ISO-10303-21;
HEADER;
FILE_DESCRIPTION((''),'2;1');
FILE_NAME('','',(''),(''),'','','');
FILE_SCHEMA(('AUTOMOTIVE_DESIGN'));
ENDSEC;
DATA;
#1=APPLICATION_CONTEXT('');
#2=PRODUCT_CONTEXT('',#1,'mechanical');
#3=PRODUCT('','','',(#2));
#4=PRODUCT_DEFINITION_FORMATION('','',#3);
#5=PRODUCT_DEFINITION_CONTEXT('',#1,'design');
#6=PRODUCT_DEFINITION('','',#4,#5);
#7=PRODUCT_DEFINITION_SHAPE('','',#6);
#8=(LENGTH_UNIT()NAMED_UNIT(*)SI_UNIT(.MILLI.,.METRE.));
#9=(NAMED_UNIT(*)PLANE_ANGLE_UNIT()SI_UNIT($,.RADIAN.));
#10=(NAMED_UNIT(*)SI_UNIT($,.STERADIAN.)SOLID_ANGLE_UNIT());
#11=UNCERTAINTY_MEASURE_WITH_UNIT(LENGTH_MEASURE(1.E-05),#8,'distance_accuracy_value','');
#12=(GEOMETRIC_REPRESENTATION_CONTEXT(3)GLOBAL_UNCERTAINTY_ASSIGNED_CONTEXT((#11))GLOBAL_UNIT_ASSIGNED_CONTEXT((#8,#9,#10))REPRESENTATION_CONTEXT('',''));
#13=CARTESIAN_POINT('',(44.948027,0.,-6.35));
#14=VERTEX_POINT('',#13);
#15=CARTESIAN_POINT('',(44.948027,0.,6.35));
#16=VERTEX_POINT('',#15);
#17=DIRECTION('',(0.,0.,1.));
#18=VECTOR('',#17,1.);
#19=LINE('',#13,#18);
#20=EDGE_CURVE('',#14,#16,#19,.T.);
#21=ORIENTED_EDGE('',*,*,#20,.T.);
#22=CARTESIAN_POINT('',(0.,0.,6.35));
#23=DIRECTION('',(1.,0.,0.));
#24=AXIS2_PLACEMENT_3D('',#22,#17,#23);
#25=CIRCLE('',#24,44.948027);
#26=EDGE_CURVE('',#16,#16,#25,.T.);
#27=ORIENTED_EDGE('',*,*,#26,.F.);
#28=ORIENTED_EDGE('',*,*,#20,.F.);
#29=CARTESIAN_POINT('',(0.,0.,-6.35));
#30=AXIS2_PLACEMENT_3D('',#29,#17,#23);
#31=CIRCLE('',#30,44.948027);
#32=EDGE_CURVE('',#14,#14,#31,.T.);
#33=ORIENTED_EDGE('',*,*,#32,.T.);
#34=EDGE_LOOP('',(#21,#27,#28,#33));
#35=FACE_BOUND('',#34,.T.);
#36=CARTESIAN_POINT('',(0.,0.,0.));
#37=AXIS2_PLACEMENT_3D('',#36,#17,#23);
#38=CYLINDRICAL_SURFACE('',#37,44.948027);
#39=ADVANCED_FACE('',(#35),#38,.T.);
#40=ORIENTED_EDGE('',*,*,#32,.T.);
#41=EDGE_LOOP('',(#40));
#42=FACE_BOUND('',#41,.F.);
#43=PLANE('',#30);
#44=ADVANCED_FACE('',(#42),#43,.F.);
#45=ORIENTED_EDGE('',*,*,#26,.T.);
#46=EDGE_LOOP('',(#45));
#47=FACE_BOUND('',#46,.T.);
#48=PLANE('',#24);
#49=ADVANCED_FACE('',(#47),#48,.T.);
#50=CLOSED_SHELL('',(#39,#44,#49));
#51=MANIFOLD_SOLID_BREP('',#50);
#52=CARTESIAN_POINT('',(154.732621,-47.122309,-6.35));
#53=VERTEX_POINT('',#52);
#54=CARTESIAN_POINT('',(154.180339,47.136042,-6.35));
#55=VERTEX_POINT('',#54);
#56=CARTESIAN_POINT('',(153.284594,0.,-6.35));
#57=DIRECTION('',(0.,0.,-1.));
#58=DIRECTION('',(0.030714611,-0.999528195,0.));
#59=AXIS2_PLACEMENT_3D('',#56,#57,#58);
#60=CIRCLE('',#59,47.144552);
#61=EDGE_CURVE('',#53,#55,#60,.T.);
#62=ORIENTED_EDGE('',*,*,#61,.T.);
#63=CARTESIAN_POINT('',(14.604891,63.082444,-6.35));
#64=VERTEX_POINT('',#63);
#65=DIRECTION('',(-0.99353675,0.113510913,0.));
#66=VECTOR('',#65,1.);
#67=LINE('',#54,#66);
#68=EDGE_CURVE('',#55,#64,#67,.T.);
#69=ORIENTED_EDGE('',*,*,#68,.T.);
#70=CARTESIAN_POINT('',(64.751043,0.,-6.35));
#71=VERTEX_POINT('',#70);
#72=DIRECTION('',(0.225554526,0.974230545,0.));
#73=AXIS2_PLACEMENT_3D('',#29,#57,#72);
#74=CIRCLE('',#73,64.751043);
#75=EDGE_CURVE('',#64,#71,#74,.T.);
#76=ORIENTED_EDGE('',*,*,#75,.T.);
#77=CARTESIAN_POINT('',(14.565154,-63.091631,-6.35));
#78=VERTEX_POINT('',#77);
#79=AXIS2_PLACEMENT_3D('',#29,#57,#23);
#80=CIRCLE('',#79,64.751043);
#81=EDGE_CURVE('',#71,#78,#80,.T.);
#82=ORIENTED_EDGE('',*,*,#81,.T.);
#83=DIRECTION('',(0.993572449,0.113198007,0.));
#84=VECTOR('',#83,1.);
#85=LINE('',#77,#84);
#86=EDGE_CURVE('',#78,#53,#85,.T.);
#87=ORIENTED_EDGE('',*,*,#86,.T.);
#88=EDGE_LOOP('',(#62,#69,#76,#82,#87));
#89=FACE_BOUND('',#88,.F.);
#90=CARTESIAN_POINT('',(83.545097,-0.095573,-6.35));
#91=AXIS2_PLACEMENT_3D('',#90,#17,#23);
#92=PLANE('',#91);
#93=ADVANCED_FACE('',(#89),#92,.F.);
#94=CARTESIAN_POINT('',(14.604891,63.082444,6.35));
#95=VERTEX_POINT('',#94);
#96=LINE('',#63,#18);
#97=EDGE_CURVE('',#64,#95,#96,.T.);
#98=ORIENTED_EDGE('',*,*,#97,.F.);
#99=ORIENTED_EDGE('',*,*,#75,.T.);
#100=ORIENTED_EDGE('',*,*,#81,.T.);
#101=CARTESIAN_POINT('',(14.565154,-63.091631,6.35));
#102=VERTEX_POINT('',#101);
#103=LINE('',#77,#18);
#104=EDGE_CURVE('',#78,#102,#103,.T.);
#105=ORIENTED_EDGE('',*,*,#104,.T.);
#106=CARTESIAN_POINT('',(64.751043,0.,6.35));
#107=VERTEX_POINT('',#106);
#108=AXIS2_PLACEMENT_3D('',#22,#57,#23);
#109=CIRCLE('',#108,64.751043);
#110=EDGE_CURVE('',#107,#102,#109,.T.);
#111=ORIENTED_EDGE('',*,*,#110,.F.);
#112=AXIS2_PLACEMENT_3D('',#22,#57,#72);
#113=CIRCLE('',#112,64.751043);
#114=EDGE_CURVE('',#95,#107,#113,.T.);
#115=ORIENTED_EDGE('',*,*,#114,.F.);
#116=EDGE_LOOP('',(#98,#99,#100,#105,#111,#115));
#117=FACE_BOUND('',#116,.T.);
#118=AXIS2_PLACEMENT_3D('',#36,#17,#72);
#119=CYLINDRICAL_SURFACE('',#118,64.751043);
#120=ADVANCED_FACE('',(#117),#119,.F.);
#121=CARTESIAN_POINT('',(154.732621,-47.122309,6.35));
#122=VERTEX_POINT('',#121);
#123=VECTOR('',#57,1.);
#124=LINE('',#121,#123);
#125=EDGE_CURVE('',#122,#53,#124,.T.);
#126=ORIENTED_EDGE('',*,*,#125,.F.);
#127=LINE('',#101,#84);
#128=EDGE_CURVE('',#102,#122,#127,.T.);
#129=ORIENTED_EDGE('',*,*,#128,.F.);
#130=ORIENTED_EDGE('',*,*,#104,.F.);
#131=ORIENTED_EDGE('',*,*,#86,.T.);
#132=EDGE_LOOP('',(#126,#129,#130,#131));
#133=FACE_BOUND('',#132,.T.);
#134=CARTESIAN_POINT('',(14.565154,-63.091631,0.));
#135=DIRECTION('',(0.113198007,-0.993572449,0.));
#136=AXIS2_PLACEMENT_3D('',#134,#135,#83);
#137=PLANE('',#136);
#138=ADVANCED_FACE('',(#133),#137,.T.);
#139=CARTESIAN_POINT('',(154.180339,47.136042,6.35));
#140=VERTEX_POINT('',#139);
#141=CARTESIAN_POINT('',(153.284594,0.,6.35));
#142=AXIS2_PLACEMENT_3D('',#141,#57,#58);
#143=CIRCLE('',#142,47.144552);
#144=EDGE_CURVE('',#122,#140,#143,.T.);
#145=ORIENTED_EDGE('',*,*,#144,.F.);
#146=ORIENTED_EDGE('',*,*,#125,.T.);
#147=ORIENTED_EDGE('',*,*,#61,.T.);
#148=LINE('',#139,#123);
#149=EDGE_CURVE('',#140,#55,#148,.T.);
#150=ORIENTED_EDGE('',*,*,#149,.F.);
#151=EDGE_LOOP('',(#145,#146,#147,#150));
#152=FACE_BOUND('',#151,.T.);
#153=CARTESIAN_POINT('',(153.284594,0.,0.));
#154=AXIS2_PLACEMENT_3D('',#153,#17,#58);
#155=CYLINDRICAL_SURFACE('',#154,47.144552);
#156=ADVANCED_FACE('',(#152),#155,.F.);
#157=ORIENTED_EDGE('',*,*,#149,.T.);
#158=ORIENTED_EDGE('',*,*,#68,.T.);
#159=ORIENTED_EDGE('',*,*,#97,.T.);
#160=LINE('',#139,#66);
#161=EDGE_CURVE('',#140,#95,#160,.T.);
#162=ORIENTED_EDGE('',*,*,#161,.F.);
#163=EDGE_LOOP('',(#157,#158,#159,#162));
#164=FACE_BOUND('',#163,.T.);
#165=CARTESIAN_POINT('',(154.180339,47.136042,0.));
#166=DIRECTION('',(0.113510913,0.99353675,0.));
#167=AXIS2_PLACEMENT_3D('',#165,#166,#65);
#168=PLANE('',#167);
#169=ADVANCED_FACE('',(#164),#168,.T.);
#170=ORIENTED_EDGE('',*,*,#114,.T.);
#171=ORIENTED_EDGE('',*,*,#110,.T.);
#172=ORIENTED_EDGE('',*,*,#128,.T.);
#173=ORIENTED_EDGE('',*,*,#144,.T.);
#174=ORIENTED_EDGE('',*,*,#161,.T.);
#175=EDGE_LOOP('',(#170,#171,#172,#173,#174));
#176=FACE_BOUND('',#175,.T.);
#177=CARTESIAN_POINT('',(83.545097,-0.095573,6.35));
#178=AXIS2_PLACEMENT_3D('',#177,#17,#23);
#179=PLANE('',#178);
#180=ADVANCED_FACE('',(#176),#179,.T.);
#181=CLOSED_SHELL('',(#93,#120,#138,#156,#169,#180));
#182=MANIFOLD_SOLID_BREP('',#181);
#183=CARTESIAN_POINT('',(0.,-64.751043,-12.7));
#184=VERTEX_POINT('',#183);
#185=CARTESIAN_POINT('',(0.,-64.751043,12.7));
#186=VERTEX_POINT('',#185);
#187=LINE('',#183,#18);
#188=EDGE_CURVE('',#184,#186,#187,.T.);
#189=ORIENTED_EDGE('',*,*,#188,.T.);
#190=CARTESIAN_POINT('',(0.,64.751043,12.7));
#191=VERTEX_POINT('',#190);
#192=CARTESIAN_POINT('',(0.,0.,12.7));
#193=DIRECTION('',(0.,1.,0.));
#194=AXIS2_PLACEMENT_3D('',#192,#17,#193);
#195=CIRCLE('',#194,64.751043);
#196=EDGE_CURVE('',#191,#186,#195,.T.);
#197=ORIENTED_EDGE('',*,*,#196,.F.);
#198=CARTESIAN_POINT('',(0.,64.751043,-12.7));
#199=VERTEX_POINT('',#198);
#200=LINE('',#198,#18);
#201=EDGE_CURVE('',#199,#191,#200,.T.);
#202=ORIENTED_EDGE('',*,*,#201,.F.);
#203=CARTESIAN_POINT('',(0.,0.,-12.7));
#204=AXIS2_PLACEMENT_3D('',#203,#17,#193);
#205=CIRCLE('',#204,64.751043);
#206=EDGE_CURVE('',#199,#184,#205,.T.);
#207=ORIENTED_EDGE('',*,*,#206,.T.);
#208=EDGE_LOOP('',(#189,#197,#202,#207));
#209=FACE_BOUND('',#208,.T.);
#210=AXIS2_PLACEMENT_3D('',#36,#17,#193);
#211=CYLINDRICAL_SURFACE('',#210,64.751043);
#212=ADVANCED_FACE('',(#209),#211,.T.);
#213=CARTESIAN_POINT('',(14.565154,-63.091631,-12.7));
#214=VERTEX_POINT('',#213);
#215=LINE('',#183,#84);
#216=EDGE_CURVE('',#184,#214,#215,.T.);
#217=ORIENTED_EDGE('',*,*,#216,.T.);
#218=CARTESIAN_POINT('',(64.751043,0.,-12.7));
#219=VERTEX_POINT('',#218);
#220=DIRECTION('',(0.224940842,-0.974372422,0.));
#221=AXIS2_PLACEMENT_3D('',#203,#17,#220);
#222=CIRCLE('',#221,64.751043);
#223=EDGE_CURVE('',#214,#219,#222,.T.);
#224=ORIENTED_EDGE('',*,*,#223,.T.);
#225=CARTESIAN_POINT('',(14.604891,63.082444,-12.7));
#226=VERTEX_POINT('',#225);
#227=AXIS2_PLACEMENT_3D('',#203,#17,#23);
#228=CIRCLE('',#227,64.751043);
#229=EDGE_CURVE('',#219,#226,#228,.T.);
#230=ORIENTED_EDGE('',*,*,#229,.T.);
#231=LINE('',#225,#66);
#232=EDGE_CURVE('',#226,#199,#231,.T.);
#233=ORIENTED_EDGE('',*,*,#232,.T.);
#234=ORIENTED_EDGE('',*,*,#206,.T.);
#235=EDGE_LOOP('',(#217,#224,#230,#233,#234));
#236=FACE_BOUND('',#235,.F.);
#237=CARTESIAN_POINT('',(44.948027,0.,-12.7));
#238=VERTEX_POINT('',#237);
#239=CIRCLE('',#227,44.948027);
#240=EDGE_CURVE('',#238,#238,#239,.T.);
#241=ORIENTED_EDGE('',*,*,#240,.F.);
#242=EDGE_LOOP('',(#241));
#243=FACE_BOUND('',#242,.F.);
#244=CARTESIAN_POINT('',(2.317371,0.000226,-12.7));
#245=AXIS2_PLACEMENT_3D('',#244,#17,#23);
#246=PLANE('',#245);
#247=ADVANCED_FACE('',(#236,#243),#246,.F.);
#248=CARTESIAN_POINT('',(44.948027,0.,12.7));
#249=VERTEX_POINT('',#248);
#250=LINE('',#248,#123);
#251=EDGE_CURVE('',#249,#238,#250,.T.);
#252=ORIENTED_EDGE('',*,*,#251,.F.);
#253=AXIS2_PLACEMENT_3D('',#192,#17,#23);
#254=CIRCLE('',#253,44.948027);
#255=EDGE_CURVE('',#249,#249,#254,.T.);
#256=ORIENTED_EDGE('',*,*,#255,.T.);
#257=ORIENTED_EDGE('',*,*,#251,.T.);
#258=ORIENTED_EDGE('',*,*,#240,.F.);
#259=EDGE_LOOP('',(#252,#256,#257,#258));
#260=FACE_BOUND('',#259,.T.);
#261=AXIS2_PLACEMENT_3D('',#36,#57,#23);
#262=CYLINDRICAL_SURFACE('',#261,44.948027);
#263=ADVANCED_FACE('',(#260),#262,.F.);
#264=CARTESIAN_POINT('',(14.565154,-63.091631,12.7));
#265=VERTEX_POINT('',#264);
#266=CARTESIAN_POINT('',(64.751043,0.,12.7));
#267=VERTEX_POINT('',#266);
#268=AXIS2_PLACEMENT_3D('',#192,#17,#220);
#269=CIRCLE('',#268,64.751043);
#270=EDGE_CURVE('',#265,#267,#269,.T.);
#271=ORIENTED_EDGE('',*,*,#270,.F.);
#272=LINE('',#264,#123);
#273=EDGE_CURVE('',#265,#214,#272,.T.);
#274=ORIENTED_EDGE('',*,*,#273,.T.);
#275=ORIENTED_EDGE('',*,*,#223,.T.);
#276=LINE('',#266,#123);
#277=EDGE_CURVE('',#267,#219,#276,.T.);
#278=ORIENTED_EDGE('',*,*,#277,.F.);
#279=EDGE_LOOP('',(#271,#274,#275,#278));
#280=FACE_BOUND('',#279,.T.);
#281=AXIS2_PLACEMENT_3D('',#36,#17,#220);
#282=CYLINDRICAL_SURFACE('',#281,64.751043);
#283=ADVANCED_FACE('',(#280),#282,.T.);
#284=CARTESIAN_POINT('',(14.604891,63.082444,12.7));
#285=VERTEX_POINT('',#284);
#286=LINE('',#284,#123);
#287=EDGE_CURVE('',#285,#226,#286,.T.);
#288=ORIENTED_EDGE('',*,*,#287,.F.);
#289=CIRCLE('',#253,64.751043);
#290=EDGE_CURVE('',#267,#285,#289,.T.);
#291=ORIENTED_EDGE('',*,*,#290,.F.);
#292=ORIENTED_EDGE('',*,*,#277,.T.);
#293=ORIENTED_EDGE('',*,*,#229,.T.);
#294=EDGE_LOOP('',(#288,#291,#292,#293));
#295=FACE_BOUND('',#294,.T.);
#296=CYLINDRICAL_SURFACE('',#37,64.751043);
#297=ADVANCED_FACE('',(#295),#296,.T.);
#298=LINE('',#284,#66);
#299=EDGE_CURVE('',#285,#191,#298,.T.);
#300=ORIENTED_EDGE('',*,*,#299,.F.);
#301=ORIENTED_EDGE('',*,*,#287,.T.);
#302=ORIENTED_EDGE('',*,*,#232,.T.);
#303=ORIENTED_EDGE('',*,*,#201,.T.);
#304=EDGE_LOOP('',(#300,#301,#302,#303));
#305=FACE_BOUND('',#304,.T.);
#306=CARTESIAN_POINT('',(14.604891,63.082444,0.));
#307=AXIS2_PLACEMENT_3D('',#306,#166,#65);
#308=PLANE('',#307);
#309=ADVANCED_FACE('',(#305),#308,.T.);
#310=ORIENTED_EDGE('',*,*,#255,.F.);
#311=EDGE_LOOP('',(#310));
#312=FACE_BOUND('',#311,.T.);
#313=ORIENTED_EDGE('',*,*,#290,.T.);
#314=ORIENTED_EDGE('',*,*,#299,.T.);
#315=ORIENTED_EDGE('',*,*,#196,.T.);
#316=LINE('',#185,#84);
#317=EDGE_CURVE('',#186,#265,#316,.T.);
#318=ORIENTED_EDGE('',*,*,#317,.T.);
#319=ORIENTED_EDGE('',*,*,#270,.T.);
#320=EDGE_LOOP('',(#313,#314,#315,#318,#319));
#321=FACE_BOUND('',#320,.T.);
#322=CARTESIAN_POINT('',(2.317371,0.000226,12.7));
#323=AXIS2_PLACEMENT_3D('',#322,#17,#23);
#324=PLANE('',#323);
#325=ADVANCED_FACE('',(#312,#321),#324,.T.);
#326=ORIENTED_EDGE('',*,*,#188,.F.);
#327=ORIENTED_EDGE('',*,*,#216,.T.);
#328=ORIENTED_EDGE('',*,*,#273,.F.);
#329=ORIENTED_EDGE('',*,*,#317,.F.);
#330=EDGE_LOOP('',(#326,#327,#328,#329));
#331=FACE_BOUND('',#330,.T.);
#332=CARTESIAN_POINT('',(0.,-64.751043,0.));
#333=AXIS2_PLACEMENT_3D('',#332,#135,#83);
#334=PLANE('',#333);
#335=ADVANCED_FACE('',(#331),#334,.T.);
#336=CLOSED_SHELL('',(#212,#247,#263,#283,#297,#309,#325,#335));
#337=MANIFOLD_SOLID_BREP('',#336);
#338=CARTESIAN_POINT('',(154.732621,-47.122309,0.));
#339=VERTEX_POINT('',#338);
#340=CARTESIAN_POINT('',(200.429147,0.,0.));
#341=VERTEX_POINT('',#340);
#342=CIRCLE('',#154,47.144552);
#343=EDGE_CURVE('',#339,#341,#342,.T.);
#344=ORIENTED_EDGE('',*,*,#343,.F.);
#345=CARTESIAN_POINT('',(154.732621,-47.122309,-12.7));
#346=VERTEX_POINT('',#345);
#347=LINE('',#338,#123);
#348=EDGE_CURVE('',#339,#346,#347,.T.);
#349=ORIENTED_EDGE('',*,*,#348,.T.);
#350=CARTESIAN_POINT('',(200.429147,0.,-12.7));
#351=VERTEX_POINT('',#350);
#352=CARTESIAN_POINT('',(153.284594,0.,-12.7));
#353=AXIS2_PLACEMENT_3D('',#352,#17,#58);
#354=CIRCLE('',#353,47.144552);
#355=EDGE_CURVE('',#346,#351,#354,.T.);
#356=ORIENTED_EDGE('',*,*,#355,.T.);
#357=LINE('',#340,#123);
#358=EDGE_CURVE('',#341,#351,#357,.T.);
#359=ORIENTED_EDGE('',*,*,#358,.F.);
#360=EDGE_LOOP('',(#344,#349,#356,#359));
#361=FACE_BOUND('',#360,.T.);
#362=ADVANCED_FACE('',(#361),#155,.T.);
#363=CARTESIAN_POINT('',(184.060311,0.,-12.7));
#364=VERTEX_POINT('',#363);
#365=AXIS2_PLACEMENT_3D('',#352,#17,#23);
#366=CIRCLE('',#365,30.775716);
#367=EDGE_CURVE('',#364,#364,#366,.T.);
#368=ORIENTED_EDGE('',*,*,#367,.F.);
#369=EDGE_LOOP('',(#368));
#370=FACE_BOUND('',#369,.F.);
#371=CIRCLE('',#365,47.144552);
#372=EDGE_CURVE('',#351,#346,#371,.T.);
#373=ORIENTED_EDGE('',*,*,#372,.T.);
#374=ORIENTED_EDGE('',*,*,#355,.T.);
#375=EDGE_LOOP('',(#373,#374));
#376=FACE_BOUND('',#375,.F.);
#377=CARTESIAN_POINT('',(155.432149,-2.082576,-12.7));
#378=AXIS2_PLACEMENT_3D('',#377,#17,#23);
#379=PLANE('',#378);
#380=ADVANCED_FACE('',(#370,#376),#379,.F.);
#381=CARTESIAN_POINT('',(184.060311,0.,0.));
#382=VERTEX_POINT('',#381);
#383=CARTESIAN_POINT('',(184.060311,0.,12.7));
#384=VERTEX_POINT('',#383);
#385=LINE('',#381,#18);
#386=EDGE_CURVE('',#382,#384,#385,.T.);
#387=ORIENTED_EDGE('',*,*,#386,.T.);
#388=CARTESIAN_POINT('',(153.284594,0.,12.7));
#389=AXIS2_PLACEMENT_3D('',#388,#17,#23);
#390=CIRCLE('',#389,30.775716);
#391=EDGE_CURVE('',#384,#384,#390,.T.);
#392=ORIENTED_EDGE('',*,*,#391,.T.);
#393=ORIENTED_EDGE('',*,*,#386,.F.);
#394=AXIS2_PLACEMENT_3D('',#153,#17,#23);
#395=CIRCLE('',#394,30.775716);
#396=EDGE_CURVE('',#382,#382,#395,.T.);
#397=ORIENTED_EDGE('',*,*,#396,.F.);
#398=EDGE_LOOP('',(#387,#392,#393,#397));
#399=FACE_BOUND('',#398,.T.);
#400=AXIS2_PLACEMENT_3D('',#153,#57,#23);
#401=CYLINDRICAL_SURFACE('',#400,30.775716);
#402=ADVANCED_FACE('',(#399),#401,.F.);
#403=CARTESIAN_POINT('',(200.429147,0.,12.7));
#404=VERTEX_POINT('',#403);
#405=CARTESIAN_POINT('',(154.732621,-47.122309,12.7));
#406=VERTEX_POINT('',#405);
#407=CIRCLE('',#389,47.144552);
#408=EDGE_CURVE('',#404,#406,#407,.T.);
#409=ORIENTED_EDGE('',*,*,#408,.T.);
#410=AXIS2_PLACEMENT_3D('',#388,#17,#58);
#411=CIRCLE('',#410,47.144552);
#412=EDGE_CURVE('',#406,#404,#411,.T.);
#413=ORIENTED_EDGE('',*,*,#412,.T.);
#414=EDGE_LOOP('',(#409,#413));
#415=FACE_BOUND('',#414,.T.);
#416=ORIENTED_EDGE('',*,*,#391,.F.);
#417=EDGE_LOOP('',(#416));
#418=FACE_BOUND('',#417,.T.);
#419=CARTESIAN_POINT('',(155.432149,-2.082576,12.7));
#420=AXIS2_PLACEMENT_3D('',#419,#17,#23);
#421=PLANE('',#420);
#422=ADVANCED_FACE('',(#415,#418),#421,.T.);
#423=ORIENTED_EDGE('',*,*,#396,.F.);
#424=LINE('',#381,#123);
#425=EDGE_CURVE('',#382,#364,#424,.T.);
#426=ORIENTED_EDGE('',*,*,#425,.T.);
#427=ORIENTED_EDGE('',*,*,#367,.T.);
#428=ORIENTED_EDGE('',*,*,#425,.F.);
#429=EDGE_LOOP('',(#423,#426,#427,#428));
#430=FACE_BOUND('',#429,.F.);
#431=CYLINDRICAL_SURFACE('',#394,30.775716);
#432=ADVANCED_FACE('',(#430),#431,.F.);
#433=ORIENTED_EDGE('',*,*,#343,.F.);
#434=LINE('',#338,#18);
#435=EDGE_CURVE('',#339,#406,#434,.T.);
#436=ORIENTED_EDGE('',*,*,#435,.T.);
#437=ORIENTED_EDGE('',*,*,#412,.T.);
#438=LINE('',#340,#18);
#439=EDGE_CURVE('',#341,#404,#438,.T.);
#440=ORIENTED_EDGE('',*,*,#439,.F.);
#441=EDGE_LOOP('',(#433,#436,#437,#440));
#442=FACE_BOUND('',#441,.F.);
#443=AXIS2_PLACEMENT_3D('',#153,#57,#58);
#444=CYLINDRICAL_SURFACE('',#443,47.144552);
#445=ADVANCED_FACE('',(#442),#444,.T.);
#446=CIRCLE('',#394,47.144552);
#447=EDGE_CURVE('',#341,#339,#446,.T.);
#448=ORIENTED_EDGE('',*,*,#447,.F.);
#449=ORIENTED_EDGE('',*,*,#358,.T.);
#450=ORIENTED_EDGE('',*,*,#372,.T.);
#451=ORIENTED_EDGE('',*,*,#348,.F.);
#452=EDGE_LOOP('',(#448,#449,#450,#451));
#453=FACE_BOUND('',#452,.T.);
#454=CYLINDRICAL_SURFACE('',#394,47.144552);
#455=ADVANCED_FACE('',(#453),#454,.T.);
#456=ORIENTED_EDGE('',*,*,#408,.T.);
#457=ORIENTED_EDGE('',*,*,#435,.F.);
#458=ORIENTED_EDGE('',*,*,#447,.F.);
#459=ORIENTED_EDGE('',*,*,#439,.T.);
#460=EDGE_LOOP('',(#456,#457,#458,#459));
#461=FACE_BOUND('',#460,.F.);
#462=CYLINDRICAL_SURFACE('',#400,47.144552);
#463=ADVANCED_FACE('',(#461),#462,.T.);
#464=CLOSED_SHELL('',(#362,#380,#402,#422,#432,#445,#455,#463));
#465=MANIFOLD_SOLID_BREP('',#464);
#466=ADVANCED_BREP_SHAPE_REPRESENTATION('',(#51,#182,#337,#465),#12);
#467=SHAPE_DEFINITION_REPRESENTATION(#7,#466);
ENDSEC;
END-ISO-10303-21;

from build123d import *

# Parameters (mm, degrees)
F0_R     = 44.9480270959
F1_DEPTH = 12.7
F0_R_2   = 30.775716183
F2_DEPTH = 6.35


with BuildPart() as f1:
    # F0 (on Top) → F1 (new body, symmetric)
    with BuildSketch(Plane.XY):
        with BuildLine():
            Line((14.6048909022, 63.0824442065), (0, 64.751043276))
            ThreePointArc((0, 64.751043276), (-64.751043276, 0), (0, -64.751043276))
            Line((0, -64.751043276), (14.5651541935, -63.0916308923))
            ThreePointArc((14.5651541935, -63.0916308923), (50.6744833956, -40.3087377365), (64.751043276, 0))
            ThreePointArc((64.751043276, 0), (50.6871755387, 40.2927765392), (14.6048909022, 63.0824442065))
        make_face()
        Circle(F0_R, mode=Mode.SUBTRACT)
    extrude(amount=F1_DEPTH, both=True)


with BuildPart() as f1b:
    # F0 (on Top) → F1, piece 2 (new body, symmetric)
    with BuildSketch(Plane.XY):
        with BuildLine():
            ThreePointArc((200.4291468306, 0), (186.9360305833, 33.0180203257), (154.1803392628, 47.1360420854))
            ThreePointArc((154.1803392628, 47.1360420854), (106.1408512327, -0.2762262139), (154.7326209823, -47.1223093808))
            ThreePointArc((154.7326209823, -47.1223093808), (187.128909941, -32.8202853277), (200.4291468306, 0))
        make_face()
        with Locations((153.2845944166, 0)):
            Circle(F0_R_2, mode=Mode.SUBTRACT)
    extrude(amount=F1_DEPTH, both=True)


with BuildPart() as f2:
    # F0 (on Top) → F2 (new body, symmetric)
    with BuildSketch(Plane.XY):
        with BuildLine():
            Line((154.1803392628, 47.1360420854), (14.6048909022, 63.0824442065))
            ThreePointArc((14.6048909022, 63.0824442065), (50.6871755387, 40.2927765392), (64.751043276, 0))
            ThreePointArc((64.751043276, 0), (50.6744833956, -40.3087377365), (14.5651541935, -63.0916308923))
            Line((14.5651541935, -63.0916308923), (154.7326209823, -47.1223093808))
            ThreePointArc((154.7326209823, -47.1223093808), (106.1408512327, -0.2762262139), (154.1803392628, 47.1360420854))
        make_face()
    extrude(amount=F2_DEPTH, both=True)


with BuildPart() as f2b:
    # F0 (on Top) → F2, piece 2 (new body, symmetric)
    with BuildSketch(Plane.XY):
        Circle(F0_R)
    extrude(amount=F2_DEPTH, both=True)


solid = Compound([f1.part, f1b.part, f2.part, f2b.part])
